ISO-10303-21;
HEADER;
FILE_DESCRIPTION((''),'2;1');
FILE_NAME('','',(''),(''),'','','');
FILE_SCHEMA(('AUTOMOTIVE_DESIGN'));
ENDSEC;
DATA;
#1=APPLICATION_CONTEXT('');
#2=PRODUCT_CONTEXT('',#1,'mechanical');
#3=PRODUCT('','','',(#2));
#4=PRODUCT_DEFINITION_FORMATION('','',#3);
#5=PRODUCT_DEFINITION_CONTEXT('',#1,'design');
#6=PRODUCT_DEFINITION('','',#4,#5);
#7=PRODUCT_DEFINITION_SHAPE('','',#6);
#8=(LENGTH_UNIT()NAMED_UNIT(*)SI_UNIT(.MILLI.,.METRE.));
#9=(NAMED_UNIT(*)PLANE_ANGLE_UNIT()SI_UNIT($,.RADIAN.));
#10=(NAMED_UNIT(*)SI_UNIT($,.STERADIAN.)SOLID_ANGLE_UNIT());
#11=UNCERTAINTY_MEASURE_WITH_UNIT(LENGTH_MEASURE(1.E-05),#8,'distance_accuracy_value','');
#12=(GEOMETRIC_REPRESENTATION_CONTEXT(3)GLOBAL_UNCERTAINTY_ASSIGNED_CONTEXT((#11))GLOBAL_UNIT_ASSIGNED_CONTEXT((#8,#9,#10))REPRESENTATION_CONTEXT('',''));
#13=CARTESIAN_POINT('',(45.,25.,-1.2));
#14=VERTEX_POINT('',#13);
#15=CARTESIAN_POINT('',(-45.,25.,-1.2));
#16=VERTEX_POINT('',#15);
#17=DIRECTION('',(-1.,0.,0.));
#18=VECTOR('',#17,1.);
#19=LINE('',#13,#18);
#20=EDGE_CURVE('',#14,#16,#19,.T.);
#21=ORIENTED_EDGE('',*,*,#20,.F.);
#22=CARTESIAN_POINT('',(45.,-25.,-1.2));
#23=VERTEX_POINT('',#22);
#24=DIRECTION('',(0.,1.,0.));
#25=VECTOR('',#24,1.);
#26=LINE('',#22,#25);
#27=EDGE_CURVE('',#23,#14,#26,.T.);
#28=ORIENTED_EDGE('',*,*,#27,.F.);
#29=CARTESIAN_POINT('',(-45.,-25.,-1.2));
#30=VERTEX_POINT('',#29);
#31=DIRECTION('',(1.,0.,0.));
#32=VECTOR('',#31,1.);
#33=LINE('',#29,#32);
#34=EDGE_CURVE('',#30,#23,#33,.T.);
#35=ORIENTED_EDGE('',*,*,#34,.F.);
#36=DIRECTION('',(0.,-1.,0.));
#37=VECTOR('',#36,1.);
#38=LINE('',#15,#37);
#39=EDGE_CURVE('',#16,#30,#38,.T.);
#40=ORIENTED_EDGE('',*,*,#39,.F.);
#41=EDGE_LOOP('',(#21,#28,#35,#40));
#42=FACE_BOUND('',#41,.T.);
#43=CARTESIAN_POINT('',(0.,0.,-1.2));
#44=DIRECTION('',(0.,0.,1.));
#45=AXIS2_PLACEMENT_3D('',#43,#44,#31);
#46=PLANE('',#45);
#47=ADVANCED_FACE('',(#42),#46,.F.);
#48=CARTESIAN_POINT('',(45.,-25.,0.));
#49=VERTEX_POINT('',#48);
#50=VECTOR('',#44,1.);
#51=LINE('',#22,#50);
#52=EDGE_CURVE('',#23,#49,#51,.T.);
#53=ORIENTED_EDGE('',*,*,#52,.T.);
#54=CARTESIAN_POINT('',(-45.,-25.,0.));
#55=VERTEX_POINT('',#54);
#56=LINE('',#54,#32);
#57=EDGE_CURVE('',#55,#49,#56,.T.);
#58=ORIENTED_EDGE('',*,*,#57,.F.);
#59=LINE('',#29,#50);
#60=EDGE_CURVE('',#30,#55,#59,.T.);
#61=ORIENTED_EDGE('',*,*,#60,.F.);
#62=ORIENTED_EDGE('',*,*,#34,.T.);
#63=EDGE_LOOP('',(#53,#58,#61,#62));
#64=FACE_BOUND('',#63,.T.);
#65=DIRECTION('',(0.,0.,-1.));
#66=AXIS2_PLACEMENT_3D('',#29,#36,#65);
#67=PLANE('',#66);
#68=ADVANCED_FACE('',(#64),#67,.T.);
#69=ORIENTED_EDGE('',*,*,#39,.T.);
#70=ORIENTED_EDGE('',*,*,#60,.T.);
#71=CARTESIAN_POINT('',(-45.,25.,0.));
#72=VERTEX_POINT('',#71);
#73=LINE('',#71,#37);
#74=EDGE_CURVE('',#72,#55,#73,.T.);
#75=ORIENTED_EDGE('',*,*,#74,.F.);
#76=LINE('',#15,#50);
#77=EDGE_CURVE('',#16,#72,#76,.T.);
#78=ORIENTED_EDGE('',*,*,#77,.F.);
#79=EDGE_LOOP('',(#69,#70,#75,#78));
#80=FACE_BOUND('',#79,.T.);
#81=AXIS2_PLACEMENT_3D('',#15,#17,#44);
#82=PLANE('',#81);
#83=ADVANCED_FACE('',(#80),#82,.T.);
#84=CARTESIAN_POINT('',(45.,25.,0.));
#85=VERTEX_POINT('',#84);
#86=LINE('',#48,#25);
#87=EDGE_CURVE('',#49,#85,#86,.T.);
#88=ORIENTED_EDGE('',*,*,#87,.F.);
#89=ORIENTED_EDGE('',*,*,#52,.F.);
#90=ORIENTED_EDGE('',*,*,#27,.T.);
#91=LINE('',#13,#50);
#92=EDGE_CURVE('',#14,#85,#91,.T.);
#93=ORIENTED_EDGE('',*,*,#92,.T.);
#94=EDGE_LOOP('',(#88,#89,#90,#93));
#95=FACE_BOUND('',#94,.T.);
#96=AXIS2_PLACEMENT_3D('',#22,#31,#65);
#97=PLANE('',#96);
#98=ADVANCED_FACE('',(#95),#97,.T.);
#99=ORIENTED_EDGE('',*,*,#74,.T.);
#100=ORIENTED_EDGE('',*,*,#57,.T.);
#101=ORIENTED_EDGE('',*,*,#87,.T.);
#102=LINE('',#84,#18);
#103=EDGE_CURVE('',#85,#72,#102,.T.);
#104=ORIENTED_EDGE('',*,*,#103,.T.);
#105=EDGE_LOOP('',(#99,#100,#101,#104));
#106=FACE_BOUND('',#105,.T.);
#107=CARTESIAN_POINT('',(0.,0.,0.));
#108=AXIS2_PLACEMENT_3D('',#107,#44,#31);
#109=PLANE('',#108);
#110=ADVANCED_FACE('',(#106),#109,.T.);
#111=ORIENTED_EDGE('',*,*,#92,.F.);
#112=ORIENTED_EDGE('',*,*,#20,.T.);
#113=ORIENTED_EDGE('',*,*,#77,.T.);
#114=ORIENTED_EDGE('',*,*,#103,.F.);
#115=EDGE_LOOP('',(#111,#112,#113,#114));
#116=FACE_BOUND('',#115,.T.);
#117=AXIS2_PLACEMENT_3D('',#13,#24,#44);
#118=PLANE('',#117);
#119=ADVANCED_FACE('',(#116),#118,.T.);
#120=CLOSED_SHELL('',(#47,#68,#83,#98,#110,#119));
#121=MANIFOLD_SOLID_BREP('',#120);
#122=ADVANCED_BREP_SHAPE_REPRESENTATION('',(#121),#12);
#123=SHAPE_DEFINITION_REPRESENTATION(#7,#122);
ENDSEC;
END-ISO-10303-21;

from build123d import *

# Parameters (mm, degrees)
SKETCH_1_W             = 90
SKETCH_1_H             = 50
SM_BASE_FLANGE_1_DEPTH = 1.2


# Sheet-metal steps are written as plain solids
with BuildPart() as part:
    # Sketch 1 → 基体-法兰1 (new body)
    with BuildSketch(Plane.XY):
        Rectangle(SKETCH_1_W, SKETCH_1_H)
    extrude(amount=-SM_BASE_FLANGE_1_DEPTH)


solid = part.part
